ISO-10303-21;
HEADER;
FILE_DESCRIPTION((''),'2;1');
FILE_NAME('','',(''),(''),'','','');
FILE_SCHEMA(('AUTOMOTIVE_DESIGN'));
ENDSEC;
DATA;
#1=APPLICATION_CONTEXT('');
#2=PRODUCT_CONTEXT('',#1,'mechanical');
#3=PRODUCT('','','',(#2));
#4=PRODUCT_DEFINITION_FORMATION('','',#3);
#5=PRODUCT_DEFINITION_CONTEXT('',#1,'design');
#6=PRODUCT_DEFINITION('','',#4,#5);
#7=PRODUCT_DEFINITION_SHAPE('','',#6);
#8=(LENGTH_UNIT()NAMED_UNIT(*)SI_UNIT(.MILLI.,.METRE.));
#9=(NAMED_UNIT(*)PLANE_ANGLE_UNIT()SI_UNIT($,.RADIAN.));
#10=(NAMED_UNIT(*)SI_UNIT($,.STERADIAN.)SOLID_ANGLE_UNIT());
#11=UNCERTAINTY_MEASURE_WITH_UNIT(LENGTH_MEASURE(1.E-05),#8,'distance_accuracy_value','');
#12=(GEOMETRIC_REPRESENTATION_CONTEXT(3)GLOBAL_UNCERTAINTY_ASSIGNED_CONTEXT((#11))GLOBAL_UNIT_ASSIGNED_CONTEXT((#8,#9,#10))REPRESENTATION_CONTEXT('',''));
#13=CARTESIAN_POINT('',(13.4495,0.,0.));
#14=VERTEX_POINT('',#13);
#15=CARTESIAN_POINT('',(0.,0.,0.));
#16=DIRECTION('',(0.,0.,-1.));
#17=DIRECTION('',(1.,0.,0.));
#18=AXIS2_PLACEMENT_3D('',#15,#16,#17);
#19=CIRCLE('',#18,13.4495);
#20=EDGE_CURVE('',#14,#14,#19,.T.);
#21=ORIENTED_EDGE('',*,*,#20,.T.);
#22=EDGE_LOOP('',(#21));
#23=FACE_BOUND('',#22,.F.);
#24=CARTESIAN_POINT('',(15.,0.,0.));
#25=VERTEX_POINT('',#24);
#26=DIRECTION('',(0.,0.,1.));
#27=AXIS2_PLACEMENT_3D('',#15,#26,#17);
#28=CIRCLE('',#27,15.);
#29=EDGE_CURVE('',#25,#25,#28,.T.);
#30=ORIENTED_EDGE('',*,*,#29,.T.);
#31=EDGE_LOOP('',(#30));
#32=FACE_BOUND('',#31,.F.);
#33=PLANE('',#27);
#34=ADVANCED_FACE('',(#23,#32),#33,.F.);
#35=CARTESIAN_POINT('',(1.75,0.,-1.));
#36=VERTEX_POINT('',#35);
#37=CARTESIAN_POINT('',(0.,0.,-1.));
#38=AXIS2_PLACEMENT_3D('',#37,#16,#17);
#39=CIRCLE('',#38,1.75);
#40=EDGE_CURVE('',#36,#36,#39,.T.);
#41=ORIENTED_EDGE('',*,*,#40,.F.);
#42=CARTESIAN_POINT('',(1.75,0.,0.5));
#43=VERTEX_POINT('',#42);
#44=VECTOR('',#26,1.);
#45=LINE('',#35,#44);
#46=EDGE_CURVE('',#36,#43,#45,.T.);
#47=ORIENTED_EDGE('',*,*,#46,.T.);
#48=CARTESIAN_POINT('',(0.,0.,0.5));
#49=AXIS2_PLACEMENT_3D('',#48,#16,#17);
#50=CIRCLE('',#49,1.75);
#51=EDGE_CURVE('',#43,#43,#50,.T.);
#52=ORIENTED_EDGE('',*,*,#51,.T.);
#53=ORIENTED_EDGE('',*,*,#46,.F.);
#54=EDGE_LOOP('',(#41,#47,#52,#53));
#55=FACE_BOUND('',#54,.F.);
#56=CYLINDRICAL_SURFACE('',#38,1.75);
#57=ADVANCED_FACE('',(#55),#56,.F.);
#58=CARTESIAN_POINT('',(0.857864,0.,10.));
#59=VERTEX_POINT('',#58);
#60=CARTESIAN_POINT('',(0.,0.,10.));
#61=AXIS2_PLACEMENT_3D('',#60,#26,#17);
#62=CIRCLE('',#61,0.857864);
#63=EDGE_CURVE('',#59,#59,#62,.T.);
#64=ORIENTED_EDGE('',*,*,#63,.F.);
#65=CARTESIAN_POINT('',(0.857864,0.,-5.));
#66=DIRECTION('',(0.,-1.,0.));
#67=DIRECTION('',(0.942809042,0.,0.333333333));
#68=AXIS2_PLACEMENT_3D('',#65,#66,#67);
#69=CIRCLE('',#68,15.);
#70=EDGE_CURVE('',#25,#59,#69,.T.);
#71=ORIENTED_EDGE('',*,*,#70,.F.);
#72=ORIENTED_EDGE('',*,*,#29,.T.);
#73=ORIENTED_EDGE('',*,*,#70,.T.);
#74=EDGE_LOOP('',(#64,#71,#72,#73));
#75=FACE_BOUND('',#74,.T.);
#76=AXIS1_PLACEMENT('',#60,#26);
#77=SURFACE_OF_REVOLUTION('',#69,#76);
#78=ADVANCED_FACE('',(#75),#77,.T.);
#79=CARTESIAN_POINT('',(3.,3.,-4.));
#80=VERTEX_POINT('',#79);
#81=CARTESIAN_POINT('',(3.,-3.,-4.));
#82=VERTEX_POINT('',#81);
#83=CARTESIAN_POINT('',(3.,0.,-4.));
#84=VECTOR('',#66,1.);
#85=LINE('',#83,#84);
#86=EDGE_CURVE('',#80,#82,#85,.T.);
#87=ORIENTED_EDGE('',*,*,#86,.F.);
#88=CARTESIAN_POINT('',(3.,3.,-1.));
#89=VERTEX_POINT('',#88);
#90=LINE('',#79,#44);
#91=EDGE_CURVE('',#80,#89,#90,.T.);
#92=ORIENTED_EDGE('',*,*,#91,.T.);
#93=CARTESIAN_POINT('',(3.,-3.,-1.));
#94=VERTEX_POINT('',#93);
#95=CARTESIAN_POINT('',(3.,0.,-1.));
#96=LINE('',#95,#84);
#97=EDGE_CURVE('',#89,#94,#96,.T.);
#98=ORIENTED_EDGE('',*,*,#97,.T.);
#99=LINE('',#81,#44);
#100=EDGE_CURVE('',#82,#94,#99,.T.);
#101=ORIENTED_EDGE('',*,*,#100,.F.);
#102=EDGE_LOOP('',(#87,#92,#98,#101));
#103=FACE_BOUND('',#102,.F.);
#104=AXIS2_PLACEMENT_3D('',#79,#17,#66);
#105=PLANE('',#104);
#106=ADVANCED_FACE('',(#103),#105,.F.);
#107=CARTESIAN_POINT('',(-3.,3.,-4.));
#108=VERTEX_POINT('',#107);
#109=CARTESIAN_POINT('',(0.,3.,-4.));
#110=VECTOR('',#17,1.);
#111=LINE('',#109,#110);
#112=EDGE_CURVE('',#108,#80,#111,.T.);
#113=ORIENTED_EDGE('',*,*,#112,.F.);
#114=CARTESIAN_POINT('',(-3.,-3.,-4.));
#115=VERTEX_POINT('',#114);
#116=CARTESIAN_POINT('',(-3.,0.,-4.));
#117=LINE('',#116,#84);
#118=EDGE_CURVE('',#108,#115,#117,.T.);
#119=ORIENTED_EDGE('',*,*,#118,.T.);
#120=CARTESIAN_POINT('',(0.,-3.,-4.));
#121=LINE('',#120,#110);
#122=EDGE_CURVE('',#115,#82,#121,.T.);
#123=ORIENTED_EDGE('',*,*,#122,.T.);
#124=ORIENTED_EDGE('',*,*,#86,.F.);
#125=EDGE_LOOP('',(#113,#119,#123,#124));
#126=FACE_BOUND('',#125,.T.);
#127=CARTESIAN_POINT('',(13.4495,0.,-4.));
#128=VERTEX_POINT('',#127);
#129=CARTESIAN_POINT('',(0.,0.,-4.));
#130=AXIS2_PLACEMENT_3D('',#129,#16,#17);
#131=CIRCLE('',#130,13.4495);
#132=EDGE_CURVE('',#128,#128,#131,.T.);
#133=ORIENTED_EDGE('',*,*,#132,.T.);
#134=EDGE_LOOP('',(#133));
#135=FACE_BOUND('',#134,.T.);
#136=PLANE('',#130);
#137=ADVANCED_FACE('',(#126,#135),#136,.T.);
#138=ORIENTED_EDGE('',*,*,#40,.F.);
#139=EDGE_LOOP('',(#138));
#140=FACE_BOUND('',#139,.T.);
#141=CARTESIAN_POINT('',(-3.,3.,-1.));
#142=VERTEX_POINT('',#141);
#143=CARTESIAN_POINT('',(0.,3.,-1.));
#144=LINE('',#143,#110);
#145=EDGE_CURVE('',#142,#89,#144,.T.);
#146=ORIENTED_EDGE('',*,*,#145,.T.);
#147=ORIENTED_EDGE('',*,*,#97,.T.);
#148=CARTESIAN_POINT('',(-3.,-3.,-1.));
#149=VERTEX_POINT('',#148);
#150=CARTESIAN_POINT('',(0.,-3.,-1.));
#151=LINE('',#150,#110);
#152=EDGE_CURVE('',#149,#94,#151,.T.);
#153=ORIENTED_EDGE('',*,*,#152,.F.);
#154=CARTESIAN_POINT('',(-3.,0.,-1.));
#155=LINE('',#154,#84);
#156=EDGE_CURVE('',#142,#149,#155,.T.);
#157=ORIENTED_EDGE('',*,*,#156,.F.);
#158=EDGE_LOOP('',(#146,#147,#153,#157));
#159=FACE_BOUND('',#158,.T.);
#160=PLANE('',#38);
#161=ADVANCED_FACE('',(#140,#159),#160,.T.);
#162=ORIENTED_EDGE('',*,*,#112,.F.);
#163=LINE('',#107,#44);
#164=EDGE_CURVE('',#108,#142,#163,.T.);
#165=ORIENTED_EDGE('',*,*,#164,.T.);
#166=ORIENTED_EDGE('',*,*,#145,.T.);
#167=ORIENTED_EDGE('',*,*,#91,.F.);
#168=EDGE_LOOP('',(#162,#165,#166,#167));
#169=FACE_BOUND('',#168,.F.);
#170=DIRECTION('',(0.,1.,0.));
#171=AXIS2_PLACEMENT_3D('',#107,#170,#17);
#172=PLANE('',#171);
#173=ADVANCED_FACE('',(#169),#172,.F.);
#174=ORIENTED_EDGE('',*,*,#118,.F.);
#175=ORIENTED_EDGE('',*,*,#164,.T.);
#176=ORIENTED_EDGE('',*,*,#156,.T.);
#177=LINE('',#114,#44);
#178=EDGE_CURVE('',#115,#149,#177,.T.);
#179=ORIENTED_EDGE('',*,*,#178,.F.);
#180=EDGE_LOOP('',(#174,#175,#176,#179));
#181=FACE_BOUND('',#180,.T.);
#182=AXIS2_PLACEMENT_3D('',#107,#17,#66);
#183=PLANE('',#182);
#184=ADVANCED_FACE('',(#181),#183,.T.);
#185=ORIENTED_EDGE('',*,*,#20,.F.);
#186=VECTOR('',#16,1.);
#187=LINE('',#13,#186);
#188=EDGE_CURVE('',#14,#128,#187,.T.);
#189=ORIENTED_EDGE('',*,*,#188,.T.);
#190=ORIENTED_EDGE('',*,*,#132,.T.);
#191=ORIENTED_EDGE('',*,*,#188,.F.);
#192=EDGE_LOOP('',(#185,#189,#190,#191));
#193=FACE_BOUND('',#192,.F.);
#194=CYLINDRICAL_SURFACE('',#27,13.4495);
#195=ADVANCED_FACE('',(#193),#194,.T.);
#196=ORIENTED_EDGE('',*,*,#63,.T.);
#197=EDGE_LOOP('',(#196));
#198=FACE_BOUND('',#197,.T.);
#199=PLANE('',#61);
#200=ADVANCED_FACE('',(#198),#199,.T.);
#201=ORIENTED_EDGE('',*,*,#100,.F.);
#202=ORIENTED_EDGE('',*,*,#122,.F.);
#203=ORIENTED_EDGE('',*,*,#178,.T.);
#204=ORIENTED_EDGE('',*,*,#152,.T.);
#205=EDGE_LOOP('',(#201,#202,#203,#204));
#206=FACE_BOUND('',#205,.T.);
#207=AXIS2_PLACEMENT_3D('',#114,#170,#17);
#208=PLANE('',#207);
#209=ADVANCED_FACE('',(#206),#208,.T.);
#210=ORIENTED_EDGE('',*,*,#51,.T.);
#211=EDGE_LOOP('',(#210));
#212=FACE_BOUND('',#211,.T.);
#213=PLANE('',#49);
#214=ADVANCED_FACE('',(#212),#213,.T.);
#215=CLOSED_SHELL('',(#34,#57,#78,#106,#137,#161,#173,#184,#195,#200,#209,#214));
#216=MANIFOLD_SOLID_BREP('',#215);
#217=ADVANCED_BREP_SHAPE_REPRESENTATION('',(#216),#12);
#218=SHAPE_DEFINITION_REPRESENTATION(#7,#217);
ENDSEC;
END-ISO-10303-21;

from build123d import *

# Parameters (mm, degrees)
F0_R     = 15
F1_DEPTH = 10
F3_R     = 13.4495
F4_DEPTH = 4
F5_W     = 6
F5_H     = 6
F6_DEPTH = 3
F7_R     = 1.75
F8_DEPTH = 1.5


# Not quite as in the source:
# - a fillet or chamfer that OpenCascade refuses, or shapes differently, is made with other operations: its cross-section is extruded or revolved along the edge and cut away or added


with BuildPart() as f1:
    # F0 (on Top) → F1 (new body)
    with BuildSketch(Plane.XY):
        Circle(F0_R)
    extrude(amount=F1_DEPTH)

    # F2: fillet of radius 15 on 1 edges, made by hand

    # F2_s1 → F2_t2 (revolve, cut)
    with BuildSketch(Plane.XZ):
        with BuildLine():
            ThreePointArc((15, 0), (9.5181184141, 7.2474487139), (0.8578643763, 10))
            Line((0.8578643763, 10), (15, 10))
            Line((15, 10), (15, 0))
        make_face()
    revolve(axis=Axis((0, 0, 10), (0, 0, 1)), mode=Mode.SUBTRACT)

    # F3 (on face) → F4 (join)
    with BuildSketch(Plane(origin=(0, 0, 0), x_dir=(1, 0, 0), z_dir=(0, 0, -1))):
        Circle(F3_R)
    extrude(amount=F4_DEPTH)

    # F5 (on face) → F6 (cut)
    with BuildSketch(Plane(origin=(0, 0, -4), x_dir=(1, 0, 0), z_dir=(0, 0, -1))):
        Rectangle(F5_W, F5_H)
    extrude(amount=-F6_DEPTH, mode=Mode.SUBTRACT)

    # F7 (on face) → F8 (cut)
    with BuildSketch(Plane(origin=(0, 0, -1), x_dir=(1, 0, 0), z_dir=(0, 0, -1))):
        Circle(F7_R)
    extrude(amount=-F8_DEPTH, mode=Mode.SUBTRACT)


solid = f1.part
